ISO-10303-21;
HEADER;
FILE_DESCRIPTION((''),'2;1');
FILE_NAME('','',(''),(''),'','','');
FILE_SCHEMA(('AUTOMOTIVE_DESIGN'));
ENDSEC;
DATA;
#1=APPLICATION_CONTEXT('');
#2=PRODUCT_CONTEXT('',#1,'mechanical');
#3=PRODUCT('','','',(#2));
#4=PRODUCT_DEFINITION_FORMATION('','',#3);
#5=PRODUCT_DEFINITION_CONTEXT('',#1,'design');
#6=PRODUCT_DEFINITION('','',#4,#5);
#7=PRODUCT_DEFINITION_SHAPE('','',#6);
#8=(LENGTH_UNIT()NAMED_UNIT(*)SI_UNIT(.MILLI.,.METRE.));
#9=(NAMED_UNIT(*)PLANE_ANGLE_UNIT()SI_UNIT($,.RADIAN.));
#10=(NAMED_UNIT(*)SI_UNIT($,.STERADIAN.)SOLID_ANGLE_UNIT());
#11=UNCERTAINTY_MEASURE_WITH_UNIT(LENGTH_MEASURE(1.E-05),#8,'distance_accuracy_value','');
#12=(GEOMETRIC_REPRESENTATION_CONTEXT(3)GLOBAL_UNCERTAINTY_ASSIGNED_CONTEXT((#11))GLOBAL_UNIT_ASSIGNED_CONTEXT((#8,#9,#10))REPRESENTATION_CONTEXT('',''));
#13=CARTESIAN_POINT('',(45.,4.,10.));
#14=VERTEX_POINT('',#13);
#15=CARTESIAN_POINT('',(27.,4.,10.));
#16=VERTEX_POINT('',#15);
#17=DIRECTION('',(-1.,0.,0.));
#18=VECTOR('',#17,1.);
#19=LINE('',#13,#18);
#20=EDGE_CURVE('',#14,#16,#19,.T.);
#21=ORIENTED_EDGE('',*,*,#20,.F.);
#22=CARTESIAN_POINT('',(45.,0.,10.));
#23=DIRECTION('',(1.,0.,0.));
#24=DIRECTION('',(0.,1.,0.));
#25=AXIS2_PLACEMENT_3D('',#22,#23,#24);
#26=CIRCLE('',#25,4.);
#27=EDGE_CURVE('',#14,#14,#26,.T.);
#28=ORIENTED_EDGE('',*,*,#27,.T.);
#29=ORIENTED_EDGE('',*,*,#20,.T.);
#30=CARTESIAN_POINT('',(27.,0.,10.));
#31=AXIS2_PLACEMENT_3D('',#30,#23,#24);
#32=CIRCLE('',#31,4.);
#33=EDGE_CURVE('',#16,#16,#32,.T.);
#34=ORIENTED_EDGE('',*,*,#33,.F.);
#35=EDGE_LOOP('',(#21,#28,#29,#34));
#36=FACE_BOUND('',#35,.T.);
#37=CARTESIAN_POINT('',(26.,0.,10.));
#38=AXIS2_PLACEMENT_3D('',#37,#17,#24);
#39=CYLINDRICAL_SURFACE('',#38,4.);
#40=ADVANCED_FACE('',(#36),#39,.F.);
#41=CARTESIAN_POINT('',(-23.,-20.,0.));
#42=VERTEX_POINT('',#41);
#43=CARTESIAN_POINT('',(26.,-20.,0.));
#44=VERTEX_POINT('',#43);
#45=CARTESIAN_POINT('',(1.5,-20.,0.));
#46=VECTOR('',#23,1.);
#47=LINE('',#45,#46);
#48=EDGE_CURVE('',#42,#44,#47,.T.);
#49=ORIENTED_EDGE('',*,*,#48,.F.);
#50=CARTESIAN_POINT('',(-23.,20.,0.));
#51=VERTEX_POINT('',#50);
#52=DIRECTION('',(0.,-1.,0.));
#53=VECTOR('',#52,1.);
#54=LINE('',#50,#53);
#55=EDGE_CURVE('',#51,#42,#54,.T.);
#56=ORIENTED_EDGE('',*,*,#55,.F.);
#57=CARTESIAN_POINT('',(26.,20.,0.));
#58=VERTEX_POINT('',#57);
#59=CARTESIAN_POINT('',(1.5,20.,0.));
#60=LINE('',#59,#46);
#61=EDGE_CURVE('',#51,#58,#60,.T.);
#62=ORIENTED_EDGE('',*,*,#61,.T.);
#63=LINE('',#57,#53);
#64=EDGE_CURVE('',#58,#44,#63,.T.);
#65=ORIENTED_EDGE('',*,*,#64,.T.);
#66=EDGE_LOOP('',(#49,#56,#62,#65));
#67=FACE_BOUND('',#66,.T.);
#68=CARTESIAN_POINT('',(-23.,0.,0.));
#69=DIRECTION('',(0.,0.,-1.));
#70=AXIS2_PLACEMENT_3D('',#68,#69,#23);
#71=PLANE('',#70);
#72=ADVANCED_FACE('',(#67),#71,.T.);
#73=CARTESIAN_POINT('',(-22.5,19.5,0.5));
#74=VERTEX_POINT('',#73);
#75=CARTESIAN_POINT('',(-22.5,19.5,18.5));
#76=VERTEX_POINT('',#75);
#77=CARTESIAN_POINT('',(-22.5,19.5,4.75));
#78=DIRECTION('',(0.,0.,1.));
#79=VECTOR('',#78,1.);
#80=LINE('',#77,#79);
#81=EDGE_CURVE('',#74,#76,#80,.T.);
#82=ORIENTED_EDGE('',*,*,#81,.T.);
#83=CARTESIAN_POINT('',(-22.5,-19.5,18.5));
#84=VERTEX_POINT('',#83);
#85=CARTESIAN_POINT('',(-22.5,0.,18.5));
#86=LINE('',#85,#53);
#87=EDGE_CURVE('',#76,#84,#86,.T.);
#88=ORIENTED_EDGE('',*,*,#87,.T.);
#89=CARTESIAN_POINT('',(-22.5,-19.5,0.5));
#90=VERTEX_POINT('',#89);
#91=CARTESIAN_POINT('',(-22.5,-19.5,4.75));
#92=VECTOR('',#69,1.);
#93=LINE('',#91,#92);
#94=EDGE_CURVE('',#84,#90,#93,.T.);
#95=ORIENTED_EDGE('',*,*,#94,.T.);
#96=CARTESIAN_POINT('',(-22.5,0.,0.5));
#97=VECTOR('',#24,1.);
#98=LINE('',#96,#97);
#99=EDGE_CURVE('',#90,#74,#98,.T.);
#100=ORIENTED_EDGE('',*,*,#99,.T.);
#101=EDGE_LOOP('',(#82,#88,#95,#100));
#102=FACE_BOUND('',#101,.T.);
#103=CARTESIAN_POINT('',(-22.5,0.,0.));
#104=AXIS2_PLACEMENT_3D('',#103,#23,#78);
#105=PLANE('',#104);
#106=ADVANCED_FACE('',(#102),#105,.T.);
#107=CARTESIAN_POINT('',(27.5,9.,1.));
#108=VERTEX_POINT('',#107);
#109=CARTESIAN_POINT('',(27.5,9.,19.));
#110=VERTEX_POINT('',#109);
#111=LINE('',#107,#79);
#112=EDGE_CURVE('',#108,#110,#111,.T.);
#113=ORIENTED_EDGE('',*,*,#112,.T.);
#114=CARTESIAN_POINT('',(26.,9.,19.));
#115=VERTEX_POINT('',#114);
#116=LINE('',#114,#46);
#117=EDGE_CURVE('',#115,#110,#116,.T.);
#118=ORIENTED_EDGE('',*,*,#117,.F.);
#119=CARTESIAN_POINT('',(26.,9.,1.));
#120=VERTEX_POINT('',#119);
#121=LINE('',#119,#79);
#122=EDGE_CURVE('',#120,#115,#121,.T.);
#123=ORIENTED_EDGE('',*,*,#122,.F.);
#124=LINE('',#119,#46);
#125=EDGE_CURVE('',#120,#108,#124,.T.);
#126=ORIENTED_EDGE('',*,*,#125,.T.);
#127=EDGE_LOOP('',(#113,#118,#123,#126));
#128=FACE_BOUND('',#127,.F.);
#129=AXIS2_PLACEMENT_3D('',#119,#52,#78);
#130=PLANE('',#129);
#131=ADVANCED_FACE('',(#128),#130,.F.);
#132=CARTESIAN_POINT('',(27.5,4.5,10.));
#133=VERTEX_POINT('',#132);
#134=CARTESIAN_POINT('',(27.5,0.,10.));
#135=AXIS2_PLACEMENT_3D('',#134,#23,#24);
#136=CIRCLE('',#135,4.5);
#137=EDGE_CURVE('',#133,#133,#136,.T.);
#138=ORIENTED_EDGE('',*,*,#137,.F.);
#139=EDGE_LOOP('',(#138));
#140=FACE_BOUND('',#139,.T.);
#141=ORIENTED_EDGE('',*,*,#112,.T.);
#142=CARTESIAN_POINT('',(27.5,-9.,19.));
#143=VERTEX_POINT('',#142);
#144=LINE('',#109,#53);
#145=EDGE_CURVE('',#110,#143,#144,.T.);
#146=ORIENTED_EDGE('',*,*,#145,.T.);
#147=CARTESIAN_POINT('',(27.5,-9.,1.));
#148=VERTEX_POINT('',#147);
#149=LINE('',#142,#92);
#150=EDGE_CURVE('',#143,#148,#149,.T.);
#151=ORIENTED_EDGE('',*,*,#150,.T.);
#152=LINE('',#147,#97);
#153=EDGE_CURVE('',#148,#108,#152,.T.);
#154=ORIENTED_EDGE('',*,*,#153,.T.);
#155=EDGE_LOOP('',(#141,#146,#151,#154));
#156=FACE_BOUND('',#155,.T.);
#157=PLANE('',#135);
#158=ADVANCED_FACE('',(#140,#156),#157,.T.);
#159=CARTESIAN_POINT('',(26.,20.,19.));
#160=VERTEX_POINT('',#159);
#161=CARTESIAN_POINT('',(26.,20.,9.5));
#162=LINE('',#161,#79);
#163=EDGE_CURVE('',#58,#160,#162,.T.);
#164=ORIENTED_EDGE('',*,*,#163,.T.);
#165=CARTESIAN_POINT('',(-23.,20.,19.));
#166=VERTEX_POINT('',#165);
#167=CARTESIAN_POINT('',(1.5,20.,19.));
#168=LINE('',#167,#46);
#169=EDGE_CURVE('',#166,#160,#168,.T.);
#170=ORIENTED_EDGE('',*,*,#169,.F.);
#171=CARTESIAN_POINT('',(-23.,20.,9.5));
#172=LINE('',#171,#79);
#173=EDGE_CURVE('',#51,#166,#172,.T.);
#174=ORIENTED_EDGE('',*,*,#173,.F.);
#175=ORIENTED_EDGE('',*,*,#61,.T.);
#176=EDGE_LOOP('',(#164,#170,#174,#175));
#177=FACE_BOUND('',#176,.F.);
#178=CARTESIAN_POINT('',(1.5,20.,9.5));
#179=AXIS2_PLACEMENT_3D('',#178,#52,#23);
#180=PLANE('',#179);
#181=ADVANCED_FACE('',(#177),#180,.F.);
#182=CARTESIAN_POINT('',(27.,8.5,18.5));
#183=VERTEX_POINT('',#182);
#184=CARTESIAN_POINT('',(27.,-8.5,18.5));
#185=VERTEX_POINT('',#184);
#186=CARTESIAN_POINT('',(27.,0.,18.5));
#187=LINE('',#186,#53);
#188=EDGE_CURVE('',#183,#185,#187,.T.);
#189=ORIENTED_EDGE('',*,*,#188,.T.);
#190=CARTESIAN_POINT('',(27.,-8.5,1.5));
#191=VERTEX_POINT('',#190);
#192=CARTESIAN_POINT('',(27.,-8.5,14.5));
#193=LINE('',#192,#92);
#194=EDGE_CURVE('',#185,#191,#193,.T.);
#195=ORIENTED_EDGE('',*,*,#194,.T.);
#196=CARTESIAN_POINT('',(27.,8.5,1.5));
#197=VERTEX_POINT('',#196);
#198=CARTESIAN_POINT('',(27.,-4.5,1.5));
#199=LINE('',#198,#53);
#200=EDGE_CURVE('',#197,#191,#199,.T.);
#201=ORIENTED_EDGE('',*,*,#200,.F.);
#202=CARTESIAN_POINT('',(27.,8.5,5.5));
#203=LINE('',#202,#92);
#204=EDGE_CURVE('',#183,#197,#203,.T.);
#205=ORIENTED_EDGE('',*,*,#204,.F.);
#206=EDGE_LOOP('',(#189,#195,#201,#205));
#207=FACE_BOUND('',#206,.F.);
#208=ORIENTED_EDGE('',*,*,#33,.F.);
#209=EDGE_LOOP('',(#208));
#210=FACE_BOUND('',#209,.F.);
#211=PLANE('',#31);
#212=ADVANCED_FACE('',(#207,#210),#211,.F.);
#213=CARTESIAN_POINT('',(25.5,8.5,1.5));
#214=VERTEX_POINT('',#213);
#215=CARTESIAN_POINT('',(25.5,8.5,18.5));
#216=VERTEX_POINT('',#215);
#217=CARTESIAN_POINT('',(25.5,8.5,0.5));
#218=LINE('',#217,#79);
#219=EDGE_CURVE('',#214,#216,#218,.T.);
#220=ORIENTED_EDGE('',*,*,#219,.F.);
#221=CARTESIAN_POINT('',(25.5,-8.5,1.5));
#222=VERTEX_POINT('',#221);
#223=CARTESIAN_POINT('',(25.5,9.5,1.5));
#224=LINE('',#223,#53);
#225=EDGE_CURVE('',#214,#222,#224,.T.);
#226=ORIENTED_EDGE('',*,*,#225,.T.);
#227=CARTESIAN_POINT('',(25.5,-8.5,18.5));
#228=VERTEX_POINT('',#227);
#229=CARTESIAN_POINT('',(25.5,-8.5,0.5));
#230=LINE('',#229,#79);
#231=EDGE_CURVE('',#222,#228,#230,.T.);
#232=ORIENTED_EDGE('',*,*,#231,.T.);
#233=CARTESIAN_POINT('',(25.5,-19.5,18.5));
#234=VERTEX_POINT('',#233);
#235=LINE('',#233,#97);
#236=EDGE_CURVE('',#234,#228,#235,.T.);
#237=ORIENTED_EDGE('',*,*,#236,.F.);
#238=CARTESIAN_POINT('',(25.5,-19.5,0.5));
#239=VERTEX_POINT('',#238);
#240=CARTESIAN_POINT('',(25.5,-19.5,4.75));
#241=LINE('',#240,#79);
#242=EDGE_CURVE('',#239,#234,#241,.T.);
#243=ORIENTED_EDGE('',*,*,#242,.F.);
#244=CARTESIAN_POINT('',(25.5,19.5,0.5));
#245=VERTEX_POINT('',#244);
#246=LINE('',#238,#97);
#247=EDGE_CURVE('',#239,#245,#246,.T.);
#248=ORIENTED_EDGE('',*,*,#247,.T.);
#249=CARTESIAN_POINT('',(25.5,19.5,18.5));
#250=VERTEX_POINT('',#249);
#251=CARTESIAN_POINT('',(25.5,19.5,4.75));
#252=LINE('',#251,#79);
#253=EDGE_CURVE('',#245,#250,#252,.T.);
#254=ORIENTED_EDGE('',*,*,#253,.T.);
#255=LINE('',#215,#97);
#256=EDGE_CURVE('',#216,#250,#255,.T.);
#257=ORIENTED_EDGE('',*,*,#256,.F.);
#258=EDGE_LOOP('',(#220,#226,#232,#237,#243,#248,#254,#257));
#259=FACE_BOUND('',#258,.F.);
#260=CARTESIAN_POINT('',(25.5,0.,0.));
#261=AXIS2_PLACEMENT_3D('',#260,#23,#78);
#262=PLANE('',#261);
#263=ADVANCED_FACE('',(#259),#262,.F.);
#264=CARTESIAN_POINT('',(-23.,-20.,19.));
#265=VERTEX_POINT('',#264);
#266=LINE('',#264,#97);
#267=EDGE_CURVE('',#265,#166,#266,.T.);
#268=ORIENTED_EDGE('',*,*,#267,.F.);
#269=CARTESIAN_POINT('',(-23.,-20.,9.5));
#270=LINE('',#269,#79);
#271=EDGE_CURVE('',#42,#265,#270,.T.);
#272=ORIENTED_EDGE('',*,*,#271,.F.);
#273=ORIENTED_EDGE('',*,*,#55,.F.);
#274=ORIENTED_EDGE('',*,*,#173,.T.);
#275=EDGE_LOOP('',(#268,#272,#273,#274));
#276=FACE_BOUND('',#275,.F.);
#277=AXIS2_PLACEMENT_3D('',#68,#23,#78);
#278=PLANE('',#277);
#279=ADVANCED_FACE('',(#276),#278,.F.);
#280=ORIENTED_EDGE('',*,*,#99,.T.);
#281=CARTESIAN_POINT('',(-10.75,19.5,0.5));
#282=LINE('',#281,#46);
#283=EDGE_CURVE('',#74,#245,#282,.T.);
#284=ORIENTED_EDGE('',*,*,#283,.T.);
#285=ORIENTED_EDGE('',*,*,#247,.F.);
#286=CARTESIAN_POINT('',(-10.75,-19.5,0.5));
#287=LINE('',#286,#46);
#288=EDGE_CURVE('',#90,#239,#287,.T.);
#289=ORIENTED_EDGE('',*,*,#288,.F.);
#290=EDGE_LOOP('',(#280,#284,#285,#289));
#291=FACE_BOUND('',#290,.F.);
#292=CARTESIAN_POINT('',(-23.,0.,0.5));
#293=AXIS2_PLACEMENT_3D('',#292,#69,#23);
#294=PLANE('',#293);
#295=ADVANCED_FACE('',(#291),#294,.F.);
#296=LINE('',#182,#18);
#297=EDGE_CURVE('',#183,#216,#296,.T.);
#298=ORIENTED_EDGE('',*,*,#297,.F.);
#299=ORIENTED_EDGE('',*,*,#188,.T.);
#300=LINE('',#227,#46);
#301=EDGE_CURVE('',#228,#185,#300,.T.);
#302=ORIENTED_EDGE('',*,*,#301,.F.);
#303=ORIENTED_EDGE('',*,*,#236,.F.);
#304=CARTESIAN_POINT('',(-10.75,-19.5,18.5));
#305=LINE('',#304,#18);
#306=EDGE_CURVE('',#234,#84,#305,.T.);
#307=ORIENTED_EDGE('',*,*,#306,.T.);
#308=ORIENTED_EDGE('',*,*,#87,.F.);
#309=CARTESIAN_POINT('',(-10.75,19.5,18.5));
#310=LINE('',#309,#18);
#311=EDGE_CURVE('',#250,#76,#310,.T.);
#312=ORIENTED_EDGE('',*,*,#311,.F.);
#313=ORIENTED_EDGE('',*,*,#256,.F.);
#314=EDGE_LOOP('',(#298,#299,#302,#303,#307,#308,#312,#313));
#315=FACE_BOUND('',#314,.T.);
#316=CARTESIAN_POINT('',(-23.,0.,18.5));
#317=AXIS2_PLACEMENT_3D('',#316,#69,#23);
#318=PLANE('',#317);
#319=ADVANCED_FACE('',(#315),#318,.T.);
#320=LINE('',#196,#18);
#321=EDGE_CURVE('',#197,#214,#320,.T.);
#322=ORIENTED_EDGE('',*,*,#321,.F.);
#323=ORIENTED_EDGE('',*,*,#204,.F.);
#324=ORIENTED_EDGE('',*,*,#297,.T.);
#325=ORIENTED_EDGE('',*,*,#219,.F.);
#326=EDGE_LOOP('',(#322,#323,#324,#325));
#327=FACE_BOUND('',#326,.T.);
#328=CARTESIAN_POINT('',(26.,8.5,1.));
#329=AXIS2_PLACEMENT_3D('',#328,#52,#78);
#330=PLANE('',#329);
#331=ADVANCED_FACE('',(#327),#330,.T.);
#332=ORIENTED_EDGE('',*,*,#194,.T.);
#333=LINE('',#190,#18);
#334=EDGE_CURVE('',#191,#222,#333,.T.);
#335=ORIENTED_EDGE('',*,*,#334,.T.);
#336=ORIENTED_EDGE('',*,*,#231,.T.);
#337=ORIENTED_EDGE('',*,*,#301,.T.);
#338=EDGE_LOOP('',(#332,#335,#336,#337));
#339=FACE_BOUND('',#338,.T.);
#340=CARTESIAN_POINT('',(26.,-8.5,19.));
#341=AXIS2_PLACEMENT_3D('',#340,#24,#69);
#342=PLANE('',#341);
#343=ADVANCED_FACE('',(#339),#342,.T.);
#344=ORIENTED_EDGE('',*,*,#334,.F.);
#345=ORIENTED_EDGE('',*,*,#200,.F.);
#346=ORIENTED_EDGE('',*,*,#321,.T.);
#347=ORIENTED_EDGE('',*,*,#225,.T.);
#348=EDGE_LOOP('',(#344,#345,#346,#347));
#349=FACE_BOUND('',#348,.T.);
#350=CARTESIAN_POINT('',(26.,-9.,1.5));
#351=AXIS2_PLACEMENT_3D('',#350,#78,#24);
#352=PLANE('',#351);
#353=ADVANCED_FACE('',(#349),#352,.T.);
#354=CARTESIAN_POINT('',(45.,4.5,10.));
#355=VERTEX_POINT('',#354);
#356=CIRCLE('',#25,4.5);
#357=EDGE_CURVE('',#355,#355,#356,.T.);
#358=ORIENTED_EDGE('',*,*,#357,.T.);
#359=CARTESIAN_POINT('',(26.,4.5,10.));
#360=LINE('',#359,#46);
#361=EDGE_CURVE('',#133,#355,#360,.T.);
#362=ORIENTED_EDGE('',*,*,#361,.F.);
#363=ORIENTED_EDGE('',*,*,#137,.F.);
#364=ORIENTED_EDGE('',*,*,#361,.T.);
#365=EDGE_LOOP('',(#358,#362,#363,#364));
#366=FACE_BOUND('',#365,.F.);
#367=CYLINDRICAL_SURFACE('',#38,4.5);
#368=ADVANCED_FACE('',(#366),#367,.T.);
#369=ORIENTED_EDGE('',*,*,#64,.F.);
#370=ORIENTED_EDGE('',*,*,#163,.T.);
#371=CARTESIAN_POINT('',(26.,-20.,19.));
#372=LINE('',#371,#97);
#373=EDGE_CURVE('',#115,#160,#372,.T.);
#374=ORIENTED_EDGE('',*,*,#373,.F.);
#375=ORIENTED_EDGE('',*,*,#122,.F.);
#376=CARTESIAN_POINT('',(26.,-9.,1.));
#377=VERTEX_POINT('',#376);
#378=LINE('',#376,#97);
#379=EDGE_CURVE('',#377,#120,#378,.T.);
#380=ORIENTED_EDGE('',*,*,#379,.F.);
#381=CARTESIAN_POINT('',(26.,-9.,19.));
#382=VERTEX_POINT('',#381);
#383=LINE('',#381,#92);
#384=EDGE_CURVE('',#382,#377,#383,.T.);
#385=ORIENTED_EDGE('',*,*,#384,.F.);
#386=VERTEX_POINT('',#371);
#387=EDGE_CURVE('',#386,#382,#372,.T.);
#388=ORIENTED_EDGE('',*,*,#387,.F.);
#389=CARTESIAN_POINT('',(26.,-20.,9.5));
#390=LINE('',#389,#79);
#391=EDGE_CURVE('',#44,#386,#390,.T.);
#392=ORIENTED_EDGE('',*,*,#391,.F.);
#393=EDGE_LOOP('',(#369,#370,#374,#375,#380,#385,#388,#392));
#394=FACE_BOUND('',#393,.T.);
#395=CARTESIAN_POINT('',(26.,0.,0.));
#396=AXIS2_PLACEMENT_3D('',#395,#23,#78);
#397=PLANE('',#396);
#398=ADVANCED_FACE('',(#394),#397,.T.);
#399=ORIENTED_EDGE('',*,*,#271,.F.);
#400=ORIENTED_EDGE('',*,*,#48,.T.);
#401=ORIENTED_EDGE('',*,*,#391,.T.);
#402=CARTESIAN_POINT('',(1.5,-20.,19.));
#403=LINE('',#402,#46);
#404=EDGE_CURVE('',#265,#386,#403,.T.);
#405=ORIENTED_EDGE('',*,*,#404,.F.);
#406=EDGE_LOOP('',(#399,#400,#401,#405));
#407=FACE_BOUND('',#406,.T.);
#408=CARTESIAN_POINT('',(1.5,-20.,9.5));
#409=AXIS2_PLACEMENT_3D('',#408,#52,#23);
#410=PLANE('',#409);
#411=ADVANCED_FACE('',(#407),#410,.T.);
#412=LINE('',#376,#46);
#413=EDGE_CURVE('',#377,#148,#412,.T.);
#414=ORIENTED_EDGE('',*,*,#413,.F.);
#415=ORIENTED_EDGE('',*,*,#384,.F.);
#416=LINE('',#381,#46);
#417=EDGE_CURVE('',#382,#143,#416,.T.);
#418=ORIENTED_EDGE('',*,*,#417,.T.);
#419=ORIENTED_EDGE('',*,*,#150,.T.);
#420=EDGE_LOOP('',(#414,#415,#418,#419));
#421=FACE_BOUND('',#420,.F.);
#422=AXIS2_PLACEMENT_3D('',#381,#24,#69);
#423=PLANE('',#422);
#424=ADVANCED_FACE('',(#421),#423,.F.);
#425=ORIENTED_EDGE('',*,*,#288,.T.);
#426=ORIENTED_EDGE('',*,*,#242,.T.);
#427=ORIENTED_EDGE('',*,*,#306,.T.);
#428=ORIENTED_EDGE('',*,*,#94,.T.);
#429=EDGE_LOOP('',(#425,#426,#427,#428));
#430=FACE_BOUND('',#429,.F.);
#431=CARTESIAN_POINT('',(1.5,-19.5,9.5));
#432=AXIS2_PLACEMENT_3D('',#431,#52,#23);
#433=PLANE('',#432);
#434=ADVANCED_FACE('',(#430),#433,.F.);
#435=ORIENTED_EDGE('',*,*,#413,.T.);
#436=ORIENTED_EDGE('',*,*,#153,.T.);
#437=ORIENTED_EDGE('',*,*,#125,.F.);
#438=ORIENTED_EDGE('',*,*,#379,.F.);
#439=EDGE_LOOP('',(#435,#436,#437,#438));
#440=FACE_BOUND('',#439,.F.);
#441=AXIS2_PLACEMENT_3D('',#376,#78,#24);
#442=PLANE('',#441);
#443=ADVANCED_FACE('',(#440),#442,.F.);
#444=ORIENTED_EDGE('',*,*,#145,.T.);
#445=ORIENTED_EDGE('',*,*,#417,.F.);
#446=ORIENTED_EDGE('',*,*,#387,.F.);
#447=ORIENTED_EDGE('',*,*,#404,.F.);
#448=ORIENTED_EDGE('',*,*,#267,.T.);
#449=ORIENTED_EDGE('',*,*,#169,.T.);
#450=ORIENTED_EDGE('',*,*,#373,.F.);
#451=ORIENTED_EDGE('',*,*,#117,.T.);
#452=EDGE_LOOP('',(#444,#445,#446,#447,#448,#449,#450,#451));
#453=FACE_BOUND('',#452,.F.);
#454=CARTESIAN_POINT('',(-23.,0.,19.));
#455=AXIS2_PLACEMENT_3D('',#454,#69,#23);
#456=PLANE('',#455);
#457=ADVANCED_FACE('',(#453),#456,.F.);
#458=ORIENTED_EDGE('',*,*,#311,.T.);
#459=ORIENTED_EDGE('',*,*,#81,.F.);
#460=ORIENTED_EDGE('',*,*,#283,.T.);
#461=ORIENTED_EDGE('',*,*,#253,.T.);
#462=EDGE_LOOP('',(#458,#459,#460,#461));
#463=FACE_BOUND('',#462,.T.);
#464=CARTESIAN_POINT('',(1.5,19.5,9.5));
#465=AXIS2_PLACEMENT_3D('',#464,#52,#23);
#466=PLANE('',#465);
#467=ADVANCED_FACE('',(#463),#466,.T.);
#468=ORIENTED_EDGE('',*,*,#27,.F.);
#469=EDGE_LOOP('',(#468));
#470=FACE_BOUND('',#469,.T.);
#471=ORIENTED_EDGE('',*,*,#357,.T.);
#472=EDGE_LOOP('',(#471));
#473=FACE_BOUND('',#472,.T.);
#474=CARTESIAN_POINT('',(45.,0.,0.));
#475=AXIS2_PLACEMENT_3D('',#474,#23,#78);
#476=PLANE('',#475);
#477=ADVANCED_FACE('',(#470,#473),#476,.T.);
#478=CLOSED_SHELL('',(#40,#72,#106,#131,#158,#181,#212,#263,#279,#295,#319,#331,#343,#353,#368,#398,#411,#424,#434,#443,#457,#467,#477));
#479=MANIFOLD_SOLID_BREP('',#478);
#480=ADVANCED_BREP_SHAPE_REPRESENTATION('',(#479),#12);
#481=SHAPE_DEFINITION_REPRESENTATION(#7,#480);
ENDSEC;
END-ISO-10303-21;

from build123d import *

# Parameters (mm, degrees)
F0_W        = 49
F0_H        = 19
F1_DEPTH    = 20
F2_R        = 4.5
F3_DEPTH    = 1.5
F4_DEPTH    = 19
F5_T        = 0.5
F5_T3_DEPTH = 19
F5_T5_DEPTH = 19


# Not quite as in the source:
# - a shell that OpenCascade refuses in one call is made with other operations: the cavity is built on its own and cut out


with BuildPart() as f1:
    # F0 (on Front) → F1 (new body, symmetric)
    with BuildSketch(Plane.XZ):
        with Locations((1.5, 9.5)):
            Rectangle(F0_W, F0_H)
    extrude(amount=F1_DEPTH, both=True)

    # F2 (on face) → F3 (join)
    with BuildSketch(Plane.YZ.offset(26)):
        Polygon((-9, 19), (-9, 1), (0, 1), (9, 1), (9, 19), (0, 19), align=None)
        with Locations((0, 10)):
            Circle(F2_R, mode=Mode.SUBTRACT)
    extrude(amount=F3_DEPTH)

    # F4 (add): a face of the model
    f4_faces = [f1.faces().sort_by_distance(p)[0] for p in [
        (26, 0, 10),
    ]]
    extrude(f4_faces, amount=F4_DEPTH)

    # F5: shell of thickness 0.5, made by hand


with BuildPart() as f5_core1:
    # F5_t2: copy of F1
    add(f1.part)

    # the walls: a layer under each face that stays
    f5_faces = [f5_core1.faces().sort_by_distance(p)[0] for p in [
        (2.25, 0, 19),
        (1.5, 20, 9.5),
        (-23, 0, 9.5),
        (1.5, -20, 9.5),
        (26, 13.3333333333, 3.1666666667),
        (26.75, -9, 10),
        (27.5, -6, 4),
        (26.75, 9, 10),
        (1.5, 0, 0),
        (26.75, 0, 1),
        (36.25, -4.5, 10),
    ]]
    thicken(f5_faces, amount=-F5_T, mode=Mode.SUBTRACT)

    # F5_s4 → F5_t3 (cut)
    with BuildSketch(Plane.XY.offset(0.5)):
        Polygon((26.005, -9.005), (25.5, -9), (25.5, -8.5), (26, -8.5), align=None)
        Polygon((26.005, 9.005), (25.5, 9), (25.5, 8.5), (26, 8.5), align=None)
    extrude(amount=F5_T3_DEPTH, mode=Mode.SUBTRACT)

    # F5_s6 → F5_t5 (cut)
    with BuildSketch(Plane.XZ.offset(-9.5)):
        Polygon((26.005, 0.995), (25.5, 1), (25.5, 1.5), (26, 1.5), align=None)
    extrude(amount=F5_T5_DEPTH, mode=Mode.SUBTRACT)

    # F5_s7 → F5_t8 (revolve, cut)
    with BuildSketch(Plane.XY.offset(10)):
        Polygon((27.505, 4.505), (27, 4.5), (27, 4), (27.5, 4), align=None)
    revolve(axis=Axis((27.5, 0, 10), (1, 0, 0)), mode=Mode.SUBTRACT)


with BuildPart() as f1_1:
    add(f1.part)

    # what is left inside the walls is the cavity
    f5_cavity = [f5_core1.part.solids().sort_by_distance(p)[0] for p in [
        (2.25, 6.5, 18.495),
    ]]
    add(f5_cavity, mode=Mode.SUBTRACT)


solid = f1_1.part
